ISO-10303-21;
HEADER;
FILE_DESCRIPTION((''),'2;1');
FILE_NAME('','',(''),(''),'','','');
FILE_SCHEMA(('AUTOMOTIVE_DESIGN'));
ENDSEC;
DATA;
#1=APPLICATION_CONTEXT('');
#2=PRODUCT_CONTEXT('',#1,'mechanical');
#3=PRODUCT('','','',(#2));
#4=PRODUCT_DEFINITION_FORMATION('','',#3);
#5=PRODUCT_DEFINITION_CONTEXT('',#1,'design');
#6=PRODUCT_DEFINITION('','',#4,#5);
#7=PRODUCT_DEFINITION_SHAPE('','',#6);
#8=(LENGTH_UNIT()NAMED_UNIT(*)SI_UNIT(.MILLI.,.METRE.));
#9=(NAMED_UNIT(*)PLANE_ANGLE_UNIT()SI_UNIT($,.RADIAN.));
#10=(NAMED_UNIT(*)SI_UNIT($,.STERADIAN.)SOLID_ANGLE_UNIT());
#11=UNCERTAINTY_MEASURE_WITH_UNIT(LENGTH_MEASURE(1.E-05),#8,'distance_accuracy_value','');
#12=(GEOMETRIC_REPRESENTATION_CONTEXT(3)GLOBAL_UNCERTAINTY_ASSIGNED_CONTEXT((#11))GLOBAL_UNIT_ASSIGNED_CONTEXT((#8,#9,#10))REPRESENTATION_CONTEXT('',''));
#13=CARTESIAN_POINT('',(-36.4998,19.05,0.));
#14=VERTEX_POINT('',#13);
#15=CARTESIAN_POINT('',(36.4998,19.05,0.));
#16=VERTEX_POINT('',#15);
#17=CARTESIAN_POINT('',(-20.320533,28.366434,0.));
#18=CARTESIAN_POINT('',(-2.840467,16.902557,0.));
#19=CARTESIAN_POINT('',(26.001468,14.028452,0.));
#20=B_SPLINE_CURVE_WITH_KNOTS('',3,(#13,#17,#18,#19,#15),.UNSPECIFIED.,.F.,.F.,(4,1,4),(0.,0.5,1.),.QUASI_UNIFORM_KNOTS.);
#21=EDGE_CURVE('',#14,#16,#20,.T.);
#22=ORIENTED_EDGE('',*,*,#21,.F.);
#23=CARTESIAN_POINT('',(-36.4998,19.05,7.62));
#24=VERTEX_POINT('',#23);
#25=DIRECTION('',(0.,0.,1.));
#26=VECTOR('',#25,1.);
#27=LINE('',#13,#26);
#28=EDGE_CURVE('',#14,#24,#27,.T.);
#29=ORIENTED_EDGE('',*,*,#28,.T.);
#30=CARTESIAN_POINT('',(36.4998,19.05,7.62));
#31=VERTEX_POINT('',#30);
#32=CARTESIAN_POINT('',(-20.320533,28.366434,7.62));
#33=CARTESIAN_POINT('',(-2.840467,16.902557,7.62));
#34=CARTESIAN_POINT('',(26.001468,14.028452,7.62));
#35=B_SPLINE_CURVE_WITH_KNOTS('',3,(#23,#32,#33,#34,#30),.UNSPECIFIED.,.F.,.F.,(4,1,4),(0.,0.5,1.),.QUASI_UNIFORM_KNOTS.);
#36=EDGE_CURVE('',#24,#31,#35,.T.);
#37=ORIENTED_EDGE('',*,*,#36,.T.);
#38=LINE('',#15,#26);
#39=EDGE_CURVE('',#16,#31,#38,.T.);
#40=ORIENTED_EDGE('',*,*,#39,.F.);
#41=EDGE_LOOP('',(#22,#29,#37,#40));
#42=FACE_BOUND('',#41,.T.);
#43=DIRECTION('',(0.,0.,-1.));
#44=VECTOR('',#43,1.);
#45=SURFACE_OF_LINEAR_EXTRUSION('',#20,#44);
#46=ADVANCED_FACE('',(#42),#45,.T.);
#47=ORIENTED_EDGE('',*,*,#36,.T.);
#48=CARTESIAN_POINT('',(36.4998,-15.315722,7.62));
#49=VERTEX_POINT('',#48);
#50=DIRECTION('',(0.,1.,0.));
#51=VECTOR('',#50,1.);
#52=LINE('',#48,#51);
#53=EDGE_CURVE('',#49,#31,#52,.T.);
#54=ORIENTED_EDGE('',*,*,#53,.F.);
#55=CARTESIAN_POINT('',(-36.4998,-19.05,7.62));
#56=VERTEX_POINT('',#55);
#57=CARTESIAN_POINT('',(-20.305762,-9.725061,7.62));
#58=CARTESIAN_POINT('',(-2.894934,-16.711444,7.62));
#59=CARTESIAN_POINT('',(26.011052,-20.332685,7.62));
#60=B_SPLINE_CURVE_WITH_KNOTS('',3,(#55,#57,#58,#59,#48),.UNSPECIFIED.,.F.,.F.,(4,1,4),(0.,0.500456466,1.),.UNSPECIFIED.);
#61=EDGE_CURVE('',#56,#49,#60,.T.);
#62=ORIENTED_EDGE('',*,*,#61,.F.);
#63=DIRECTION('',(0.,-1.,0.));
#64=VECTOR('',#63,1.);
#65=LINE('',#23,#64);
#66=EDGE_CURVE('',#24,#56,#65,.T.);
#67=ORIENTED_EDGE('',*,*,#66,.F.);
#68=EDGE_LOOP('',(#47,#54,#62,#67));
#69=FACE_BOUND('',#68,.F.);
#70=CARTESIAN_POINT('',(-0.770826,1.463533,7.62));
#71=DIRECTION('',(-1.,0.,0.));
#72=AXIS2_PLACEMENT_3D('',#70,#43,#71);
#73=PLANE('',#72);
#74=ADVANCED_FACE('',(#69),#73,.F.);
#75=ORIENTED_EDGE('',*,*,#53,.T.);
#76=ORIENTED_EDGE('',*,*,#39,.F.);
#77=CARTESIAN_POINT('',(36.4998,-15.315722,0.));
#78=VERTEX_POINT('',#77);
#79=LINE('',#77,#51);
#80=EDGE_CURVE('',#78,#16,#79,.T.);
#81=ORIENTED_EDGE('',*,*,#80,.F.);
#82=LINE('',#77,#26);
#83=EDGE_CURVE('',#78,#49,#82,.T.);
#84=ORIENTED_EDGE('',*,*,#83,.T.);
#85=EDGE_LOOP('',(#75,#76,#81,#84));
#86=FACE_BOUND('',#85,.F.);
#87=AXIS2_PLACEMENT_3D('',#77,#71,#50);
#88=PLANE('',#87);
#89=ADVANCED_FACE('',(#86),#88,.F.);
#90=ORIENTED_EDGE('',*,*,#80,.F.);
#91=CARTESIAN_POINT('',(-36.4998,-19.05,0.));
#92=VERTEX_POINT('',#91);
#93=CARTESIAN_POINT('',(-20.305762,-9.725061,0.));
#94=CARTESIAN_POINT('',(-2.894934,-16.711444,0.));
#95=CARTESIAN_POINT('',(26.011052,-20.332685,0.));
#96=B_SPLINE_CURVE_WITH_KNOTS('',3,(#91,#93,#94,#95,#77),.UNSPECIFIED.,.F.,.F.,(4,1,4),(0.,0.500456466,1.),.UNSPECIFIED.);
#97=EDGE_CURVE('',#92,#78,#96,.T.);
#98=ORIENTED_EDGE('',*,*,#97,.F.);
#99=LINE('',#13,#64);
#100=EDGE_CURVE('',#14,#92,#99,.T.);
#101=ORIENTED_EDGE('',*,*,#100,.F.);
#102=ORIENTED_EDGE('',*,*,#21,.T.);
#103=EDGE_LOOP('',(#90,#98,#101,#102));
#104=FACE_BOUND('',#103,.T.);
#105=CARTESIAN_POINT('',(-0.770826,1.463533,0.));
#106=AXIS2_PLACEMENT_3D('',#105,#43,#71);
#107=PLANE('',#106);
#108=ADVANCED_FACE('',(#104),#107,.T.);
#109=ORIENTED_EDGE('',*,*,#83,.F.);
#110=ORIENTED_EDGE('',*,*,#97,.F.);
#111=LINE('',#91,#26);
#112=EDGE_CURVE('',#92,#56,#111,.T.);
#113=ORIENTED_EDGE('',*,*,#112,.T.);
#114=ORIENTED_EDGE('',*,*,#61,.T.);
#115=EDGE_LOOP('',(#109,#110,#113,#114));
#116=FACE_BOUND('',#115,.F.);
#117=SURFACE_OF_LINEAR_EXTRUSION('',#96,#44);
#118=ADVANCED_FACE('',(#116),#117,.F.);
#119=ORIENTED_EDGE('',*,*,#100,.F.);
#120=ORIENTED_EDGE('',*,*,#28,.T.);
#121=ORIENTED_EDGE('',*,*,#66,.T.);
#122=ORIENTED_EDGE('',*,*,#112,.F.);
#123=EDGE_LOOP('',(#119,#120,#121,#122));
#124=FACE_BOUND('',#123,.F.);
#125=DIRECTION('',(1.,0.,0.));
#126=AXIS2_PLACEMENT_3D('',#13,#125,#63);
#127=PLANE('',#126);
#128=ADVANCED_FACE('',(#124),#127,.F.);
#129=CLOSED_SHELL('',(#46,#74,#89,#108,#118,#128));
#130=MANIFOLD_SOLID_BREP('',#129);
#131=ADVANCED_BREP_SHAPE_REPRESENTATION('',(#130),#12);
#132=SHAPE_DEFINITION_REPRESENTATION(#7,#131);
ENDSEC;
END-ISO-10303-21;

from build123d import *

# Parameters (mm, degrees)
F1_DEPTH = 7.62


with BuildPart() as f1:
    # F0 (on Top) → F1 (new body)
    with BuildSketch(Plane.XY):
        with BuildLine():
            add(Edge.make_bspline(
                [(-36.4998, 19.05), (-20.3205329989, 28.3664337277), (-2.8404673129, 16.9025570855), (26.0014676247, 14.0284521013), (36.4998, 19.05)],
                knots=[0, 0, 0, 0, 0.5, 1, 1, 1, 1], degree=3))
            Line((-36.4998, 19.05), (-36.4998, -19.05))
            add(Edge.make_bspline(
                [(-36.4998, -19.05), (-20.3057624329, -9.7250610044), (-2.8949336053, -16.7114442079), (26.0110518853, -20.3326853111), (36.4998, -15.3157217428)],
                knots=[0, 0, 0, 0, 0.5004564659, 1, 1, 1, 1], degree=3))
            Line((36.4998, -15.3157217428), (36.4998, 19.05))
        make_face()
    extrude(amount=F1_DEPTH)


solid = f1.part
